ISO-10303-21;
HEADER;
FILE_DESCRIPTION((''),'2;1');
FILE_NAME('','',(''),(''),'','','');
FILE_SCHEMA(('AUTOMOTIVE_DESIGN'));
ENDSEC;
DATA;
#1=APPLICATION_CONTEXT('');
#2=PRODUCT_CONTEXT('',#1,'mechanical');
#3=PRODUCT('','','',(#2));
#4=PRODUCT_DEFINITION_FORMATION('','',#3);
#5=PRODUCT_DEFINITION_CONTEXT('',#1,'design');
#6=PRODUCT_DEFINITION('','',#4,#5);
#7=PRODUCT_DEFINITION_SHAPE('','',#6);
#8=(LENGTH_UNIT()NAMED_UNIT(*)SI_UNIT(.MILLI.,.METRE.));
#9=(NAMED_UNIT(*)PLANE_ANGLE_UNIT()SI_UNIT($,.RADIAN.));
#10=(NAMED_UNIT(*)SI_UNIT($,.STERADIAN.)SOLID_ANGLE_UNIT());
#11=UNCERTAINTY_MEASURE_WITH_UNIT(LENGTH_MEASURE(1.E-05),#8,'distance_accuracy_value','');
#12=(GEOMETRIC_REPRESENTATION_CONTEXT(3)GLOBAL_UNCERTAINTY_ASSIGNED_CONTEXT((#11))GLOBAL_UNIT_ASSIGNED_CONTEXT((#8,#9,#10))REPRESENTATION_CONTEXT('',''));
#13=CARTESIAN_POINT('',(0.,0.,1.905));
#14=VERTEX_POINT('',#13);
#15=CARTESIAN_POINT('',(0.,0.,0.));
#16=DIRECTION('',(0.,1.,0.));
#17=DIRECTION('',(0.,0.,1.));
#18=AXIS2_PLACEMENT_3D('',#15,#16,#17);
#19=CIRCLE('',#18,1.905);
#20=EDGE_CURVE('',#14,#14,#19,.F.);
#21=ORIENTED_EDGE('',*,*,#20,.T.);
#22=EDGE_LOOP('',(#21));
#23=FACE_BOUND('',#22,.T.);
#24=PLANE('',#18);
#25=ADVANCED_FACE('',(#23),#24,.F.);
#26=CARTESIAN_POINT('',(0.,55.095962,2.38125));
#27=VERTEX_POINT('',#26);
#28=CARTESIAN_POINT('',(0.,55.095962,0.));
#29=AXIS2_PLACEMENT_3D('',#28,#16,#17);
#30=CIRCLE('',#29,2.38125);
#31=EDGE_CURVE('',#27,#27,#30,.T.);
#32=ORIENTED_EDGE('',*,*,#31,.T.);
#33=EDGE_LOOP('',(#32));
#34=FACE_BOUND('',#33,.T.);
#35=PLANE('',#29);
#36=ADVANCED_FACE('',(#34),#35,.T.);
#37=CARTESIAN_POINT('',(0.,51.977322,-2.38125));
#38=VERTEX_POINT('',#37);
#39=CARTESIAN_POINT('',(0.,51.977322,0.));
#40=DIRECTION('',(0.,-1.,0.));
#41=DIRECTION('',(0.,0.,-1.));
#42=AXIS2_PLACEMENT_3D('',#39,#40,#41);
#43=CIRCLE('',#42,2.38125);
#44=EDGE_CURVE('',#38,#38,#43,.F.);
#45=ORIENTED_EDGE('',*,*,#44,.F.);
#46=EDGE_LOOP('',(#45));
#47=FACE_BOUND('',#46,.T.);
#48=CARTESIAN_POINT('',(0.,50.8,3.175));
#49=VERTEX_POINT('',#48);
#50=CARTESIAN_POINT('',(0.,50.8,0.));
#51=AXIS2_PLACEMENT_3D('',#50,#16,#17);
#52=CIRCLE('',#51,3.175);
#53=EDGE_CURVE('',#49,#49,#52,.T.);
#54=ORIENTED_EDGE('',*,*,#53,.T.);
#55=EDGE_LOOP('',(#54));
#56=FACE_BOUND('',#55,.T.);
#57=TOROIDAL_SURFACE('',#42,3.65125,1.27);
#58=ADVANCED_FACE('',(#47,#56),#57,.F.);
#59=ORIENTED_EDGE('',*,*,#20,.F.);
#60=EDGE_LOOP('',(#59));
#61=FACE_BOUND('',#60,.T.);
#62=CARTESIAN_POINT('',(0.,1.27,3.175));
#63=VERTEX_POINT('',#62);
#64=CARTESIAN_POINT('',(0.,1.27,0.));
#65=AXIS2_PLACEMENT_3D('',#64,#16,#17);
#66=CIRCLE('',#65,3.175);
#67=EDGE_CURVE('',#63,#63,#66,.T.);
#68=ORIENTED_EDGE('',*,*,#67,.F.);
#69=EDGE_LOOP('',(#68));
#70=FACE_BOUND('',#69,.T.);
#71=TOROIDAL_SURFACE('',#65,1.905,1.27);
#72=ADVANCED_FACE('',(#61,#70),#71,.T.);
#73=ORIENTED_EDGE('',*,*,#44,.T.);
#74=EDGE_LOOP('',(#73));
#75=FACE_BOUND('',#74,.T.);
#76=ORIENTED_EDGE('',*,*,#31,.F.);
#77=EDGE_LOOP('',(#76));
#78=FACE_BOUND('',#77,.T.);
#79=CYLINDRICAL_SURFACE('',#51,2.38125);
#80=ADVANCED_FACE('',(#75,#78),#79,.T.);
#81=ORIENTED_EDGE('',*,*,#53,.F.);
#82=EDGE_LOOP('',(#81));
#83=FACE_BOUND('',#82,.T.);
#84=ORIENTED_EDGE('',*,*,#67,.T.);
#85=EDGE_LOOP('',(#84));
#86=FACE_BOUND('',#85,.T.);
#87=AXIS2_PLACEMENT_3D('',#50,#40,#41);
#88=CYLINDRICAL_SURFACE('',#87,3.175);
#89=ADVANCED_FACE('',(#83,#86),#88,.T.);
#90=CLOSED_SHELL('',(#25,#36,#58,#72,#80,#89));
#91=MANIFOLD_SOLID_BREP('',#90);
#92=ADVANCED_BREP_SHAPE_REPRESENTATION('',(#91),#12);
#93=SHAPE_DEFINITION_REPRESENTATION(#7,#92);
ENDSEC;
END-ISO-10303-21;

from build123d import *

# Parameters (mm, degrees)
SKETCH1_R           = 3.175
BOSS_EXTRUDE1_DEPTH = 50.8
FILLET1_R           = 1.27
SKETCH4_R           = 2.38125
FILLET2_R           = 1.27


with BuildPart() as part:
    # Sketch1 → Boss-Extrude1 (new body)
    with BuildSketch(Plane(origin=(0, 0, 0), x_dir=(1, 0, 0), z_dir=(0, 1, 0))):
        with Locations(Location((0, 0, 0), (0, 0, 270))):
            Circle(SKETCH1_R)
    extrude(amount=BOSS_EXTRUDE1_DEPTH)

    # Fillet1
    fillet1_edges = [part.edges().sort_by_distance(p)[0] for p in [
        (0, 0, -3.175),
    ]]
    fillet(fillet1_edges, radius=FILLET1_R)

    # Sweep1: sweep along a path in Sketch2
    with BuildLine(Plane.XY) as sweep1_path:
        Line((0, 50.8), (0, 55.095962307))
    # Sketch4 → Sweep1 (sweep)
    with BuildSketch(Plane(origin=(0, 50.8, 0), x_dir=(1, 0, 0), z_dir=(0, 1, 0))):
        Circle(SKETCH4_R)
    sweep(path=sweep1_path.line)

    # Fillet2
    # the kernel refuses this fillet: 1.27 mm, written as the material it adds along each edge
    with BuildSketch(Plane(origin=(0, 50.8, 0), x_dir=(1, 0, 0), z_dir=(0, 0, 1))) as fillet2_piece_1:
        with BuildLine():
            CenterArc((3.65125, 1.17732151), FILLET2_R, 180, 67.975687163)
            Line((2.38125, 1.17732151), (2.35585, 1.17732151))
            Line((2.35585, 1.17732151), (2.35585, 0))
            Line((2.35585, 0), (2.38125, -0.0254))
            ThreePointArc((2.38125, -0.0254), (2.778125, -0.0254), (3.165475, -0.02354643))
            Line((3.165475, -0.02354643), (3.175, 0))
        make_face()
    revolve(axis=Axis((0, 50.8, 0), (0, 1, 0)))


solid = part.part
